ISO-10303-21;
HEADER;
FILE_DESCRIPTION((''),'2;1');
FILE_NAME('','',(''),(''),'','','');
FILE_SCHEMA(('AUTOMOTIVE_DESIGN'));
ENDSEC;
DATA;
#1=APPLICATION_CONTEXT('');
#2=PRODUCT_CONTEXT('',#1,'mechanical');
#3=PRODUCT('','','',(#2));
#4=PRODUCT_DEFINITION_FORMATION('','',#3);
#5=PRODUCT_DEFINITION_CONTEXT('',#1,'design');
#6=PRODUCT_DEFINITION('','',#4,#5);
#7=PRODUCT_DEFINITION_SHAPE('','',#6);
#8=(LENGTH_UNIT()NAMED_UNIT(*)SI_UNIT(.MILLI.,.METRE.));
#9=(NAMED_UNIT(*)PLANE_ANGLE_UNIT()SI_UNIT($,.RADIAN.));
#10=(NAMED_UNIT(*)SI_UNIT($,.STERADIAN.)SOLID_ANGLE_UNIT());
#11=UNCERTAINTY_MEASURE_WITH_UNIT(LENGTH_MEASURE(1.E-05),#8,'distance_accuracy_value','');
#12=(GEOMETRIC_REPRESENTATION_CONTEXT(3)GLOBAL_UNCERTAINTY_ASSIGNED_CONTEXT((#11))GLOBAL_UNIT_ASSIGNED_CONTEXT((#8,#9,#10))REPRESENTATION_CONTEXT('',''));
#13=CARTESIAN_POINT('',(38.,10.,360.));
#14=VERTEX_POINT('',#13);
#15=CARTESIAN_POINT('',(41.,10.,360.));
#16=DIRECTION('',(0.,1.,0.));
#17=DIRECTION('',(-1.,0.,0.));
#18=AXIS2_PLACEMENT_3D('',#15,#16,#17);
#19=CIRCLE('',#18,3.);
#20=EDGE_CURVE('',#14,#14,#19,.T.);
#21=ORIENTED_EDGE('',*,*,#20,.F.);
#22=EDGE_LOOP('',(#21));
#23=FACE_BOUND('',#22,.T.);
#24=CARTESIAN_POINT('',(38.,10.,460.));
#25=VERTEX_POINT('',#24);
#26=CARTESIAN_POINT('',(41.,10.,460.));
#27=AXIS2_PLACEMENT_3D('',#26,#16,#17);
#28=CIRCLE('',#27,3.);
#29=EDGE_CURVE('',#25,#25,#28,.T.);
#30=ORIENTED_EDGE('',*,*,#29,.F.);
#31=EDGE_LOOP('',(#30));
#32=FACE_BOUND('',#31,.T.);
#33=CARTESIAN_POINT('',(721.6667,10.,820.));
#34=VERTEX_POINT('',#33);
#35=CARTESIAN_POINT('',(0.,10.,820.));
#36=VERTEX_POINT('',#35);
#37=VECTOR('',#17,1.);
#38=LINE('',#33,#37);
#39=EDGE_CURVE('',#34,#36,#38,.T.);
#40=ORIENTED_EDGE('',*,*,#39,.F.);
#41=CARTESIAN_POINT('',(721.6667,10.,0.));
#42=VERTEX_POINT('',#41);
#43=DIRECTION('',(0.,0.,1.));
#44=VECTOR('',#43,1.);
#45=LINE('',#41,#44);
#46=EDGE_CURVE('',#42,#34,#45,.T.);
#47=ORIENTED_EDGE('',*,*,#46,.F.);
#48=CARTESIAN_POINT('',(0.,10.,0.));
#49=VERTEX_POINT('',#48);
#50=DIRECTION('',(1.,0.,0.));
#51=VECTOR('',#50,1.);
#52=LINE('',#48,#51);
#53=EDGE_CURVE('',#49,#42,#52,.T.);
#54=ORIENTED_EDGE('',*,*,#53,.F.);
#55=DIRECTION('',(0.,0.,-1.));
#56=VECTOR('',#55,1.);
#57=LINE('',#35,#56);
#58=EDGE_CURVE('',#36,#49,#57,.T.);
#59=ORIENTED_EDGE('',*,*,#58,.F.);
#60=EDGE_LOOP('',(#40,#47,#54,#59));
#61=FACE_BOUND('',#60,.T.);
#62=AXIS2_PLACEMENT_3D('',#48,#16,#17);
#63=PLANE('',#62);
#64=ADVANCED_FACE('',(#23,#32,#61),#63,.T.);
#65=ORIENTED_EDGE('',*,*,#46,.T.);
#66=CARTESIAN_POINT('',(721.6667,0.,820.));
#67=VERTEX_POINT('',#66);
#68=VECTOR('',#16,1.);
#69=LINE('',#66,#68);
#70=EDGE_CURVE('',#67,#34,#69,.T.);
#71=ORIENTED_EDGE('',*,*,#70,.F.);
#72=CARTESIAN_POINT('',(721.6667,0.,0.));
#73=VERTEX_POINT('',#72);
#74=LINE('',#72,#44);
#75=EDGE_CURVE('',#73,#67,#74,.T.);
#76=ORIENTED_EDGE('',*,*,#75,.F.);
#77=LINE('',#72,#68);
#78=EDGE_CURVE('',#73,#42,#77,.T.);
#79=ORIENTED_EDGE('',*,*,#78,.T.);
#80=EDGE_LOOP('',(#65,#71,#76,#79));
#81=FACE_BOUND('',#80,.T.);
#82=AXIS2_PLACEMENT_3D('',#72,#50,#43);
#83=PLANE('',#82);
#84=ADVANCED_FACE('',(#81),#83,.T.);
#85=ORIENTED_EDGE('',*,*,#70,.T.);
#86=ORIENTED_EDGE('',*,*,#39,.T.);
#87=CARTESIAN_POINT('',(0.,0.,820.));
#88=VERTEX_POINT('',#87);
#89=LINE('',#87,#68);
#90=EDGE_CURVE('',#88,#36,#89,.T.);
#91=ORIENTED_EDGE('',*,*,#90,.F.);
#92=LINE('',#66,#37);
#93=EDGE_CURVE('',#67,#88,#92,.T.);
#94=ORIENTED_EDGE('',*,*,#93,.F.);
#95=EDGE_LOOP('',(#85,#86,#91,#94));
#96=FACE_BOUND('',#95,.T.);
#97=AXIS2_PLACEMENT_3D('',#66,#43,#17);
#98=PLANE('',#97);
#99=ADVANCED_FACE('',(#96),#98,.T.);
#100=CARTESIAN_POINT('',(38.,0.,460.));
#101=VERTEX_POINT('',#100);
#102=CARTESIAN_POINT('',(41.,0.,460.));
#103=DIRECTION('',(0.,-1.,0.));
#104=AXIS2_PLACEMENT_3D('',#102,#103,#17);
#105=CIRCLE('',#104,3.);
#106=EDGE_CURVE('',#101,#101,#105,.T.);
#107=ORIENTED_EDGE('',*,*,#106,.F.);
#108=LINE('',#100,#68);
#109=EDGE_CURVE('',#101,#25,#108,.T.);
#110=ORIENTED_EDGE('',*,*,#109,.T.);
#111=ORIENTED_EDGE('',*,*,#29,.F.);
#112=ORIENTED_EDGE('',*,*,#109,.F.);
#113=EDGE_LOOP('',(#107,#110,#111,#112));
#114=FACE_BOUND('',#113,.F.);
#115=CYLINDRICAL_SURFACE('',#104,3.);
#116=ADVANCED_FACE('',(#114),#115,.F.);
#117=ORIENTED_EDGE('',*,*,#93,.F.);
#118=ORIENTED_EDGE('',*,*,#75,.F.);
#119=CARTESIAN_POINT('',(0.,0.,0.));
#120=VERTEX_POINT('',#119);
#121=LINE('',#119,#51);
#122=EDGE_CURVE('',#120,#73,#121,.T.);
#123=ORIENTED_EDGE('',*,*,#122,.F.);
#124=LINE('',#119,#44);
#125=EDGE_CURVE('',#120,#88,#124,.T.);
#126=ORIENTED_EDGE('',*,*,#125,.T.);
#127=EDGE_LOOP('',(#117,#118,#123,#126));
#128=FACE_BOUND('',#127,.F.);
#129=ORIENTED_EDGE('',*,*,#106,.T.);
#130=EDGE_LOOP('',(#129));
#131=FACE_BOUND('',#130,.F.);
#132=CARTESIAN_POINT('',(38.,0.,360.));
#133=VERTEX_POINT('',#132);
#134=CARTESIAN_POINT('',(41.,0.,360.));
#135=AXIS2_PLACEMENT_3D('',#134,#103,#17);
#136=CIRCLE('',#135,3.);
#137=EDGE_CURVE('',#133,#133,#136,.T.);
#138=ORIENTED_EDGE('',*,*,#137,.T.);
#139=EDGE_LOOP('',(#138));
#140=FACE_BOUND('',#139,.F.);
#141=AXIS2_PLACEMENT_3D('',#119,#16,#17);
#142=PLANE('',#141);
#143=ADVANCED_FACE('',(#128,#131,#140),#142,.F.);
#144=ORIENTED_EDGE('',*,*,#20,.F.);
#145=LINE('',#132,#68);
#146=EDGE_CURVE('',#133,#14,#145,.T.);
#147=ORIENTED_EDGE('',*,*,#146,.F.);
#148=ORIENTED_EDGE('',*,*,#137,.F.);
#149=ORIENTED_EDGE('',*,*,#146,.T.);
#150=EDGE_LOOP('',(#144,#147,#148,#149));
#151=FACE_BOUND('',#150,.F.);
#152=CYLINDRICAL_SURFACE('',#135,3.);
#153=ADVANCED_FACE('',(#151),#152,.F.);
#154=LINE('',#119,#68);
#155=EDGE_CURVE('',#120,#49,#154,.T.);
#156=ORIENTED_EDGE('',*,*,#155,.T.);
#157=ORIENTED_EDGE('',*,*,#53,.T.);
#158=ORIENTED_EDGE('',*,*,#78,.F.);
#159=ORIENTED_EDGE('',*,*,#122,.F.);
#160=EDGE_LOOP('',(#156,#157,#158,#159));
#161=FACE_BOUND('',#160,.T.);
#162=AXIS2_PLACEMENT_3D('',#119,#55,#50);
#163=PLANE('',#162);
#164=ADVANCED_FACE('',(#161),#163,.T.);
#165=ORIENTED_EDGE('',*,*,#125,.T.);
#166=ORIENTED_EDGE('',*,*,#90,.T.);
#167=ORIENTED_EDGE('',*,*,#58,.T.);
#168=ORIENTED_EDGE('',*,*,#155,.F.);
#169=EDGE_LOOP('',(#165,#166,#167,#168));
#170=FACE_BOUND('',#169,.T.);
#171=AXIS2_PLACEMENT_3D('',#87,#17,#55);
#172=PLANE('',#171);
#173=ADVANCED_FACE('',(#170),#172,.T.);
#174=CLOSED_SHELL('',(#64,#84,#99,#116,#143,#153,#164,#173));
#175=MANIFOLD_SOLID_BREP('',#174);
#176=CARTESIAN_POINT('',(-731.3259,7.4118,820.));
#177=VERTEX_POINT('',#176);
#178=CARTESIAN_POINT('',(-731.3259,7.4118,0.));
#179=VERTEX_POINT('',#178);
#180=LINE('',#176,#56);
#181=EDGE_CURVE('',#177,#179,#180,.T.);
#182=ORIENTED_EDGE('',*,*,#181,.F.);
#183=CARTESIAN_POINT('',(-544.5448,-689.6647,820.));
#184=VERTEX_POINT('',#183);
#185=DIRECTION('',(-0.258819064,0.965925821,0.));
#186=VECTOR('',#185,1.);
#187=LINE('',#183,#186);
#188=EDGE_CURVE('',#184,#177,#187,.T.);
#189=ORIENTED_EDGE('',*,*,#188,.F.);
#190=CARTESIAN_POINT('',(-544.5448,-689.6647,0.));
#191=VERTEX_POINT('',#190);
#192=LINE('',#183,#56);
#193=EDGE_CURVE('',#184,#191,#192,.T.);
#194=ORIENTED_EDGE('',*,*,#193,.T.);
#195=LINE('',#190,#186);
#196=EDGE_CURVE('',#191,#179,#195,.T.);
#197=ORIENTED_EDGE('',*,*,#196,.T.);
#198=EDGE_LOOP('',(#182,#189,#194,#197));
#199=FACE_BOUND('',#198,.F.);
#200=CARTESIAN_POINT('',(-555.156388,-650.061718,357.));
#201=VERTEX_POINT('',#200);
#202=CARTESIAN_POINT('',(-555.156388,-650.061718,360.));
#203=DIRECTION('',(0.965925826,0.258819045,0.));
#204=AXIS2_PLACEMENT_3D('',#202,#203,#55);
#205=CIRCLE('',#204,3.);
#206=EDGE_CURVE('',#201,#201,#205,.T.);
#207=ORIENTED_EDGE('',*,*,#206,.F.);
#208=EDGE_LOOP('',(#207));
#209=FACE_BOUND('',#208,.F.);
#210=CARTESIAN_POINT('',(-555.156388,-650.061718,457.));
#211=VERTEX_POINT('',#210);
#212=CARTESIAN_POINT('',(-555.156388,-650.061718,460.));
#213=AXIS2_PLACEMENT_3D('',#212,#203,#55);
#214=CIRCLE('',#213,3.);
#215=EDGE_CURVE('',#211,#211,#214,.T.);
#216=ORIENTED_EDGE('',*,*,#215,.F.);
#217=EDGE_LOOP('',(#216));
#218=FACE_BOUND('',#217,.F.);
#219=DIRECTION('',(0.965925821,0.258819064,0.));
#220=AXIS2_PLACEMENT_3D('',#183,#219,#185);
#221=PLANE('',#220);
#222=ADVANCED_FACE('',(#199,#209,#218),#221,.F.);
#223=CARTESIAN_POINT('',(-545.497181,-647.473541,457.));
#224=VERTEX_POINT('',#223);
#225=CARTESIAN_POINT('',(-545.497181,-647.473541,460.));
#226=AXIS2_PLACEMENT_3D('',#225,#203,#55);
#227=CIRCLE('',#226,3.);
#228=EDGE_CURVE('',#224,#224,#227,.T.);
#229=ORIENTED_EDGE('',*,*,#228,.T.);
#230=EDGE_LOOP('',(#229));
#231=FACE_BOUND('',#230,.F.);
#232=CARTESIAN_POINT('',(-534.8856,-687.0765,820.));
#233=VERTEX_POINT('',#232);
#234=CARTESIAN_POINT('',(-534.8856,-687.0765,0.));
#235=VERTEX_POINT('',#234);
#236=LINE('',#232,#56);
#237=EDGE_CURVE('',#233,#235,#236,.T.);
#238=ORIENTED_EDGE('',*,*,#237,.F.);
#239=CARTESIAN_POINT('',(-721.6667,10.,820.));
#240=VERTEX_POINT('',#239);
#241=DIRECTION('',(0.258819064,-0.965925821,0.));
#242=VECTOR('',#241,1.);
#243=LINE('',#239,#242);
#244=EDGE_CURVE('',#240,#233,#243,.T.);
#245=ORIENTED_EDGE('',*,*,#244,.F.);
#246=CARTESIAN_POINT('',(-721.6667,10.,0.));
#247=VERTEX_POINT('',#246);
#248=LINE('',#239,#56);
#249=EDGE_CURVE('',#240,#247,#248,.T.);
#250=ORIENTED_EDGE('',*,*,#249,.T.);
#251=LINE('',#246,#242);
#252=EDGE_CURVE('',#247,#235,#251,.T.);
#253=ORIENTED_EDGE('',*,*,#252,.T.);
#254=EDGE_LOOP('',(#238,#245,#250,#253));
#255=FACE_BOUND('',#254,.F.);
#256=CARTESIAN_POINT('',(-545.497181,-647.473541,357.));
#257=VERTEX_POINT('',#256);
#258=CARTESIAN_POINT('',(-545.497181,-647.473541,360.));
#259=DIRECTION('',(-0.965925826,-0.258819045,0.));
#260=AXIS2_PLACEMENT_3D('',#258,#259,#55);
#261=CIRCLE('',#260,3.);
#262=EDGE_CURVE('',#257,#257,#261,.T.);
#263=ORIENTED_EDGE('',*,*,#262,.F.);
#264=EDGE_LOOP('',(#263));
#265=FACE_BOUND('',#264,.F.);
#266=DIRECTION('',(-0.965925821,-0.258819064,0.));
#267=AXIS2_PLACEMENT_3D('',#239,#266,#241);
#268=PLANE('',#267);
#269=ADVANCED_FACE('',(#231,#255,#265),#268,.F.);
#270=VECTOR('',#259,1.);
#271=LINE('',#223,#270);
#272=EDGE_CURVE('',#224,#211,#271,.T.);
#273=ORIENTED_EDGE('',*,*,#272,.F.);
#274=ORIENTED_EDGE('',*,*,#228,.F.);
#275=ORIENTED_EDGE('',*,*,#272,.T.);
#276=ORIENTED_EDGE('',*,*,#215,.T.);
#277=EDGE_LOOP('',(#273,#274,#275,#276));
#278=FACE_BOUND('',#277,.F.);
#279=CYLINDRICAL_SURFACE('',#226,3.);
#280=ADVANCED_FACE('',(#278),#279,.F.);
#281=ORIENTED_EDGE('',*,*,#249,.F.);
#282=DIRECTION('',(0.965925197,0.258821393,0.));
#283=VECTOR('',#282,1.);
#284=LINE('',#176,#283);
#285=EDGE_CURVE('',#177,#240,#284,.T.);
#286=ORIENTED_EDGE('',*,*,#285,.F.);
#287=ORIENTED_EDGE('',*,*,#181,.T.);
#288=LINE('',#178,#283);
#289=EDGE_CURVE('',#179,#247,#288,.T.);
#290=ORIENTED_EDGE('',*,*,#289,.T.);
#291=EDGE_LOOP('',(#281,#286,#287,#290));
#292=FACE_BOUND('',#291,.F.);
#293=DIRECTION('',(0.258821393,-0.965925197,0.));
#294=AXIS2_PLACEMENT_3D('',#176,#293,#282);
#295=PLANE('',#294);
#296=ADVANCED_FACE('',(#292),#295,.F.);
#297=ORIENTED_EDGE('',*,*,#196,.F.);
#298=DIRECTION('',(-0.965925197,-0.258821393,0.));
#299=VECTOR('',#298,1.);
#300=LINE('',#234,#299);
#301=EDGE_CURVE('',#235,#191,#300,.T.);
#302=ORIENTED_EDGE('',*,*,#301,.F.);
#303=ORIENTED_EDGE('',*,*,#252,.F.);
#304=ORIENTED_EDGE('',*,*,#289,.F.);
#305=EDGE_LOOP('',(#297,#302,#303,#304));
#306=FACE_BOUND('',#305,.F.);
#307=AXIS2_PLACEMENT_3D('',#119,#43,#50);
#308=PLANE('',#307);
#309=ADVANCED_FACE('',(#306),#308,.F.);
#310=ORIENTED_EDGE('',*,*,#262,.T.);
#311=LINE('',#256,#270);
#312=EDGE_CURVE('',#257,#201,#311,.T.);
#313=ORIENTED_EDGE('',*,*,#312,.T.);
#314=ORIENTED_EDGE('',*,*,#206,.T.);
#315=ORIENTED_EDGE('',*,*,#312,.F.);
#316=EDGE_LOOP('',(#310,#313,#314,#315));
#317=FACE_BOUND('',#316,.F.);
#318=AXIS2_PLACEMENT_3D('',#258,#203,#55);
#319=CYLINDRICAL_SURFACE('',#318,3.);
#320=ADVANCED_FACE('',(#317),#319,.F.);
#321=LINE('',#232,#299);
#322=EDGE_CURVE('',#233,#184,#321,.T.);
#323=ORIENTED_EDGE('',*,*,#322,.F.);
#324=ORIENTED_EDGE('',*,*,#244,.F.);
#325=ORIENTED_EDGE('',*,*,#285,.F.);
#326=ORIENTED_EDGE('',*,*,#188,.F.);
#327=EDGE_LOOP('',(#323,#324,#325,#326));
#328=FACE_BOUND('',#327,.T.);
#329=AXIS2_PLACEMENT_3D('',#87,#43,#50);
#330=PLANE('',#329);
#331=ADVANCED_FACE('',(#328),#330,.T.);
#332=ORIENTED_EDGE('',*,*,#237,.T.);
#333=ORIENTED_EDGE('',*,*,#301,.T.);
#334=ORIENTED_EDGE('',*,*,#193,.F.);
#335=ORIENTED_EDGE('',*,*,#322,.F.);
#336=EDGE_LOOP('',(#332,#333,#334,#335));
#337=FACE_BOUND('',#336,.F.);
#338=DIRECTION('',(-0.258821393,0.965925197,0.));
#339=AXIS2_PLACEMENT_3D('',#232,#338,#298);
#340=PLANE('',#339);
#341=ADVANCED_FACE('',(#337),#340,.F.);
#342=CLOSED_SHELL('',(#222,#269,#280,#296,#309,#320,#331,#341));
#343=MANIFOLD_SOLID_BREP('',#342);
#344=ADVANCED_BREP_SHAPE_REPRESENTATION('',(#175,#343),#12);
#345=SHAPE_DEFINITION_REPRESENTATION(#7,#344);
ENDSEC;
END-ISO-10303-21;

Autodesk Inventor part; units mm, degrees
ref_plane "YZ Plane" through (0, 0, 0) normal (1, 0, 0) x (0, 1, 0)
ref_plane "XZ Plane" through (0, 0, 0) normal (0, 1, 0) x (-1, 0, 0)
ref_plane "XY Plane" through (0, 0, 0) normal (0, 0, 1) x (1, 0, 0)
sketch "Sketch1" plane through (0, 0, 0) normal (0, 1, 0) x (-1, 0, 0)
  line L0 (0, 0) -> (-721.6667, 0)
  line L1 (-721.6667, 0) -> (-721.6667, 820)
  line L2 (-721.6667, 820) -> (0, 820)
  line L3 (0, 820) -> (0, 0)
  line L4 (0, 410) -> (-41, 410)
  line L5 (-41, 410) -> (-41, 460)
  line L6 (-41, 460) -> (-41, 360)
  circle A0 centre (-41, 460) radius 3
  circle A1 centre (-41, 360) radius 3
  dimension "ancho_m" = 721.6667
  dimension "h_inf" = 820
  dimension "d2" = 41
  dimension "d3" = 50
  dimension "d4" = 100
  dimension "d5" = 6
  dimension "d6" = 6
extrude "Extrusion1" add sketch "Sketch1" along normal blind 10
sketch "Boceto10" plane through (0, 0, 820) normal (0, 0, 1) x (1, 0, 0)
  line L0 (721.6667, 10) -> (0, 10) projected
  line L1 (0, 10) -> (-721.6667, 10)
  line L2 (-721.6667, 10) -> (-534.8856, -687.0765)
  line L3 (-721.6667, 10) -> (0, 10) construction
  line L4 (-534.8856, -687.0765) -> (-544.5448, -689.6647)
  line L5 (-544.5448, -689.6647) -> (-731.3259, 7.4118)
  line L6 (-731.3259, 7.4118) -> (-721.6667, 10)
  point P0 (0, 0)
  dimension "d49" = 721.6667
  dimension "d50" = 721.6667
  dimension "angulo" = 75
  dimension "d52" = 10
  dimension "d53" = 721.6667
extrude "Extrusión10" add sketch "Boceto10" against normal blind 820
sketch "Boceto11" plane through (-534.8856, -687.0765, 820) normal (0.9659258, 0.258819, 0) x (0, 0, -1)
  line L0 (0, 721.6667) -> (0, 0) projected
  line L1 (0, 0) -> (820, 0) projected
  line L2 (820, 721.6667) -> (820, 0) projected
  line L3 (0, 721.6667) -> (820, 721.6667) projected
  line L4 (0, 0) -> (820, 0) projected
  line L5 (410, 0) -> (410, 41)
  line L6 (410, 41) -> (360, 41)
  line L7 (360, 41) -> (460, 41)
  circle A0 centre (360, 41) radius 3
  circle A1 centre (460, 41) radius 3
  point P0 (820, 525.2263)
  dimension "d56" = 41
  dimension "d57" = 50
  dimension "d58" = 100
  dimension "d59" = 6
  dimension "d60" = 6
extrude "Extrusión11" cut sketch "Boceto11" against normal up to next contours A0 | A1
equation "\"d2\" = 0.05 * h_inf"
equation "\"d49\" = ancho_m"
equation "\"d50\" = ancho_m"
equation "\"d52\" = espesor"
equation "\"d53\" = ancho_m"
equation "\"d54\" = h_inf"
equation "\"d56\" = 0.05 * h_inf"
equation "\"d61\" = h_inf"
equation "\"espesor\" = 10"
properties part number "puerta_inf"
